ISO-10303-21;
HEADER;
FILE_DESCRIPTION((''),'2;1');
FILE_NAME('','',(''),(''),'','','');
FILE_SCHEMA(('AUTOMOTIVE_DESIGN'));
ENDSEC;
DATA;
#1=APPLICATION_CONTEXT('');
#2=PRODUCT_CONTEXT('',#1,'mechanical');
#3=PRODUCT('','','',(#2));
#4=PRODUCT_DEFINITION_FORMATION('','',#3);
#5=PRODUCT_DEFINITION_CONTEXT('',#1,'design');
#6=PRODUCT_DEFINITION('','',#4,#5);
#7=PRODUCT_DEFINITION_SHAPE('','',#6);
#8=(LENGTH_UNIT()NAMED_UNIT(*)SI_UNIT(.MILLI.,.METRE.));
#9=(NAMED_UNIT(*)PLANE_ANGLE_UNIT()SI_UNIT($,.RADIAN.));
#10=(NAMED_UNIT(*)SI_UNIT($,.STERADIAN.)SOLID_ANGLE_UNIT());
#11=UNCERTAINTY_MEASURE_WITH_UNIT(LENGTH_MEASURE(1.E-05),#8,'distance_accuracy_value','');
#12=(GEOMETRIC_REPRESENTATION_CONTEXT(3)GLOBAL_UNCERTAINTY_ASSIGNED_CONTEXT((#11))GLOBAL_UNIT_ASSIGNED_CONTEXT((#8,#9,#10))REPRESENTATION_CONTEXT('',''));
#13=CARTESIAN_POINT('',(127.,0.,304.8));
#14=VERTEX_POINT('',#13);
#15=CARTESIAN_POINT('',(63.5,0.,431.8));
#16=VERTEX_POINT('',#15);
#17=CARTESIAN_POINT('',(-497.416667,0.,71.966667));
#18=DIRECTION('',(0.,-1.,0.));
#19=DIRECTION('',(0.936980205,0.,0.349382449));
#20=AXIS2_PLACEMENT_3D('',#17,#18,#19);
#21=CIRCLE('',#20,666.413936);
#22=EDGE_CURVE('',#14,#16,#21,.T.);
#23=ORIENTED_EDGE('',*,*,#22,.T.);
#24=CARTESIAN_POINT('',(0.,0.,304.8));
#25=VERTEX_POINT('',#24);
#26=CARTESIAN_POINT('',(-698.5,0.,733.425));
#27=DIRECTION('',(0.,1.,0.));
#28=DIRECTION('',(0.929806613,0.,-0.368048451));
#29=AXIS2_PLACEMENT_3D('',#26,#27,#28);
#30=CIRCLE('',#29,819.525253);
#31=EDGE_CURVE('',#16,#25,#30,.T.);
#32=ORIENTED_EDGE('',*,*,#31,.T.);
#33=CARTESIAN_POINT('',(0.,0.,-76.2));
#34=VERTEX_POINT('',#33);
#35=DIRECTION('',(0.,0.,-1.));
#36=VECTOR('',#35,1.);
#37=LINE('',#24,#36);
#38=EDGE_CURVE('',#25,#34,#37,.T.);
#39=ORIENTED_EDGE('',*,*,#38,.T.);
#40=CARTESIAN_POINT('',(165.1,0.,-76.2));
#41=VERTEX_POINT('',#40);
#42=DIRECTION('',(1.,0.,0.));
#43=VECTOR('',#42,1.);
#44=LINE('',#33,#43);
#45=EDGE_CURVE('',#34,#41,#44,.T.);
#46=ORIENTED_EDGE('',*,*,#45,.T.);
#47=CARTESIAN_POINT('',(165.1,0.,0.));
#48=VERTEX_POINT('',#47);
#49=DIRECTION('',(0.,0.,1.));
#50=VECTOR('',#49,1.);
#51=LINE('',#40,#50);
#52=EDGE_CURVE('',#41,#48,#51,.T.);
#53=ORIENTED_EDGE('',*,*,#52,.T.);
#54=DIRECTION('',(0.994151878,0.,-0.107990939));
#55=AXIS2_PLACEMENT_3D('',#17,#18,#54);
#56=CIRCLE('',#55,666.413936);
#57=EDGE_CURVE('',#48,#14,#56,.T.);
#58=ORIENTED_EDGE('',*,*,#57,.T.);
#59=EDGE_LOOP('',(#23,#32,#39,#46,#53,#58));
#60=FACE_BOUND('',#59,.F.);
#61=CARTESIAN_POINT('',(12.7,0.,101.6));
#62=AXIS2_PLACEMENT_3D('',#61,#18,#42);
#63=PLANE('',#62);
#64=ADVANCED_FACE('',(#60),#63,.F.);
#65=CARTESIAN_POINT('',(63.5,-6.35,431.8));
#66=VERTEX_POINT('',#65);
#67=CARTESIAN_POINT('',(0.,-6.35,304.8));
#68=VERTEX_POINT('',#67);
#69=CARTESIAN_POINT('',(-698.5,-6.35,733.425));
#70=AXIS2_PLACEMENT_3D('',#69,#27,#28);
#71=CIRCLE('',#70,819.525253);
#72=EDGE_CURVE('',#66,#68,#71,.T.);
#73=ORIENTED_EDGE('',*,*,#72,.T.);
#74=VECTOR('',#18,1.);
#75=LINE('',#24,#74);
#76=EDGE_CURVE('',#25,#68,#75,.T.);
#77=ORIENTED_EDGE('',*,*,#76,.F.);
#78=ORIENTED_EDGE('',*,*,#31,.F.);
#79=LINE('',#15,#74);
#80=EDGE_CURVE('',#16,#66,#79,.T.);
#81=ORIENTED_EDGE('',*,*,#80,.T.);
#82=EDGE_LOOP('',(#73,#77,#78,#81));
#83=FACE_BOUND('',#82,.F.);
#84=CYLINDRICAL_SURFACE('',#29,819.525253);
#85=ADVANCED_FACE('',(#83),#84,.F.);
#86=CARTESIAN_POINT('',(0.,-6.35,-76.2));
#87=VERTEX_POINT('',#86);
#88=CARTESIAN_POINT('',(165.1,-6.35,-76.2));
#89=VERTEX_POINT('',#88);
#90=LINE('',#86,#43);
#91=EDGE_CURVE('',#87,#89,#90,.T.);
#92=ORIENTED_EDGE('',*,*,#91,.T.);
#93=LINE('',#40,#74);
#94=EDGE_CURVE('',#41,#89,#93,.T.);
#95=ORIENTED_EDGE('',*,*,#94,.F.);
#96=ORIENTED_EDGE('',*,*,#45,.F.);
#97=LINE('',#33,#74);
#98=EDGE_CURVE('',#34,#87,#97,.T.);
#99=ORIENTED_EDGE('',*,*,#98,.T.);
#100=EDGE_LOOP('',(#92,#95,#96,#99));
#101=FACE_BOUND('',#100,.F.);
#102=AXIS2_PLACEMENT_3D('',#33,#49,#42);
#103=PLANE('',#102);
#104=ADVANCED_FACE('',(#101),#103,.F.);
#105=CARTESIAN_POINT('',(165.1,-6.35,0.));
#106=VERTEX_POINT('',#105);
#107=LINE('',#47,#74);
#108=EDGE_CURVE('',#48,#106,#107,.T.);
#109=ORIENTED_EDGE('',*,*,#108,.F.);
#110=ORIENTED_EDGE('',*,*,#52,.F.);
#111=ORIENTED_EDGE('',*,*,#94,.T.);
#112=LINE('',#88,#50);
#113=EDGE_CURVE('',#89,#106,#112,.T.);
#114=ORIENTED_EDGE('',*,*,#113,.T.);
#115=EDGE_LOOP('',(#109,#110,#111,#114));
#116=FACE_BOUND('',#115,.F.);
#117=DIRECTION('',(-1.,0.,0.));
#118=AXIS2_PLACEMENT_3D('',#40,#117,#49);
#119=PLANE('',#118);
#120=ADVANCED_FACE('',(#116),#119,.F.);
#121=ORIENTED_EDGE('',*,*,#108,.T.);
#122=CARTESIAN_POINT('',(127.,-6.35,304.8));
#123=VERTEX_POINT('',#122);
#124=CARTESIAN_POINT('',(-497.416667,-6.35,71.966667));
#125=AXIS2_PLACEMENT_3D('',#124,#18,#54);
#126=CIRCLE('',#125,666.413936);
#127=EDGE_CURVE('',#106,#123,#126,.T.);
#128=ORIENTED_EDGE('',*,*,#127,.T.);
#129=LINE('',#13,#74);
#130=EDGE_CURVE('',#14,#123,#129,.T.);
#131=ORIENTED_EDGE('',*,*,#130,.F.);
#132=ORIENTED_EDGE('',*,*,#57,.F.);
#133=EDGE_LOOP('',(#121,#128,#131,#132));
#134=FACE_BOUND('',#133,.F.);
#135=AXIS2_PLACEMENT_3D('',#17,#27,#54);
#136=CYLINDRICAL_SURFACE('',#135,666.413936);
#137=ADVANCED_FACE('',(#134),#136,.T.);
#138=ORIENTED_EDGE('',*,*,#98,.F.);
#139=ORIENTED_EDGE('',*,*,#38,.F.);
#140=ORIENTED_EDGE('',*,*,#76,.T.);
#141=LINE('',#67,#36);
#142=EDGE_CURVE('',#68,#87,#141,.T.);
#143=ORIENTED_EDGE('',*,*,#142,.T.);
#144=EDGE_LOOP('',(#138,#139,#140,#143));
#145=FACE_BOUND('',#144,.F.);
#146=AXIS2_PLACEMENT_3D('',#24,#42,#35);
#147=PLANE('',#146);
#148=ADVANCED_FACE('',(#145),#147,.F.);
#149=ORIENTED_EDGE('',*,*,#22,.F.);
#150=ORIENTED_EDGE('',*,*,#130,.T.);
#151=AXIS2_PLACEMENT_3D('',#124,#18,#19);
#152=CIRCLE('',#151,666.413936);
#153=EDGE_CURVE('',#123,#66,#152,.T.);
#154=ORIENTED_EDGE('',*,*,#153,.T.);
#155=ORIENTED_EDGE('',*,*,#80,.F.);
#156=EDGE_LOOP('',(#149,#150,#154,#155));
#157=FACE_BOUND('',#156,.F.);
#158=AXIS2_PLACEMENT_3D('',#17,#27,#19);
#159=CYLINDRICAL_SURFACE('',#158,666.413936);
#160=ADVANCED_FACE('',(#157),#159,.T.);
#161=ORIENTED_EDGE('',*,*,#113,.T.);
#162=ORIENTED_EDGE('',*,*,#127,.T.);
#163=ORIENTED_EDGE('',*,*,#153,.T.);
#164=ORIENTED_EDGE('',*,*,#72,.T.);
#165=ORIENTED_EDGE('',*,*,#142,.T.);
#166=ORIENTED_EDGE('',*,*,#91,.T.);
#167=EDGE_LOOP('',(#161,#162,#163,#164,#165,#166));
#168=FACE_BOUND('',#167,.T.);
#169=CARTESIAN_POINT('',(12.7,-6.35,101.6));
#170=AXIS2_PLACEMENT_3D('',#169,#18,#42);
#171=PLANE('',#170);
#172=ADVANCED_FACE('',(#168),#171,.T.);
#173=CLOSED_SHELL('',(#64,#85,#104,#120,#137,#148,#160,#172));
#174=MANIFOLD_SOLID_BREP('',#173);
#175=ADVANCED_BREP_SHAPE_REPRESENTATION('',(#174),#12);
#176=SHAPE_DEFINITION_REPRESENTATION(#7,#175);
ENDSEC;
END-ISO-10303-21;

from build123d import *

# Parameters (mm, degrees)
F0_W     = 25.4
F0_H     = 203.2
F0_H_2   = 101.6
F0_W_2   = 63.5
F0_W_3   = 38.1
F1_DEPTH = 6.35


with BuildPart() as f1:
    # F0 (on Front) → F1 (new body)
    with BuildSketch(Plane.XZ):
        with Locations((12.7, 101.6)):
            Rectangle(F0_W, F0_H)
        with Locations((12.7, 254)):
            Rectangle(F0_W, F0_H_2)
        with BuildLine():
            ThreePointArc((25.4, 349.25), (13.0471808847, 326.826610923), (0, 304.8))
            Line((0, 304.8), (25.4, 304.8))
            Line((25.4, 304.8), (25.4, 349.25))
        make_face()
        with BuildLine():
            Line((25.4, 349.25), (25.4, 304.8))
            Line((25.4, 304.8), (63.5, 304.8))
            Line((63.5, 304.8), (63.5, 431.8))
            ThreePointArc((63.5, 431.8), (45.5956444739, 389.996241012), (25.4, 349.25))
        make_face()
        with BuildLine():
            Line((63.5, 431.8), (63.5, 304.8))
            Line((63.5, 304.8), (127, 304.8))
            ThreePointArc((127, 304.8), (98.6420785739, 369.996039287), (63.5, 431.8))
        make_face()
        with Locations((95.25, 254)):
            Rectangle(F0_W_2, F0_H_2)
        with Locations((44.45, 254)):
            Rectangle(F0_W_3, F0_H_2)
        Polygon((25.4, 203.2), (25.4, 0), (50.8, 0), (63.5, 0), (63.5, 203.2), align=None)
        with Locations((95.25, 101.6)):
            Rectangle(F0_W_2, F0_H)
        Polygon((152.4, 203.2), (127, 203.2), (127, 0), (130.463650802, 0), (152.4, 0), align=None)
        with BuildLine():
            Line((152.4, 0), (165.1, 0))
            ThreePointArc((165.1, 0), (168.0222390688, 35.93060895), (168.9972698039, 71.9666666667))
            ThreePointArc((168.9972698039, 71.9666666667), (158.4139149447, 190.2619875611), (127, 304.8))
            Line((127, 304.8), (127, 203.2))
            Line((127, 203.2), (152.4, 203.2))
            Line((152.4, 203.2), (152.4, 0))
        make_face()
        with BuildLine():
            Line((25.4, 0), (0, 0))
            Line((0, 0), (0, -76.2))
            Line((0, -76.2), (152.3172585759, -76.2))
            ThreePointArc((152.3172585759, -76.2), (159.8138971323, -38.2854114575), (165.1, 0))
            Line((165.1, 0), (152.4, 0))
            Line((152.4, 0), (130.463650802, 0))
            Line((130.463650802, 0), (127, 0))
            Line((127, 0), (63.5, 0))
            Line((63.5, 0), (50.8, 0))
            Line((50.8, 0), (25.4, 0))
        make_face()
        with BuildLine():
            ThreePointArc((165.1, 0), (159.8138971323, -38.2854114575), (152.3172585759, -76.2))
            Line((152.3172585759, -76.2), (165.1, -76.2))
            Line((165.1, -76.2), (165.1, 0))
        make_face()
    extrude(amount=F1_DEPTH)


solid = f1.part
